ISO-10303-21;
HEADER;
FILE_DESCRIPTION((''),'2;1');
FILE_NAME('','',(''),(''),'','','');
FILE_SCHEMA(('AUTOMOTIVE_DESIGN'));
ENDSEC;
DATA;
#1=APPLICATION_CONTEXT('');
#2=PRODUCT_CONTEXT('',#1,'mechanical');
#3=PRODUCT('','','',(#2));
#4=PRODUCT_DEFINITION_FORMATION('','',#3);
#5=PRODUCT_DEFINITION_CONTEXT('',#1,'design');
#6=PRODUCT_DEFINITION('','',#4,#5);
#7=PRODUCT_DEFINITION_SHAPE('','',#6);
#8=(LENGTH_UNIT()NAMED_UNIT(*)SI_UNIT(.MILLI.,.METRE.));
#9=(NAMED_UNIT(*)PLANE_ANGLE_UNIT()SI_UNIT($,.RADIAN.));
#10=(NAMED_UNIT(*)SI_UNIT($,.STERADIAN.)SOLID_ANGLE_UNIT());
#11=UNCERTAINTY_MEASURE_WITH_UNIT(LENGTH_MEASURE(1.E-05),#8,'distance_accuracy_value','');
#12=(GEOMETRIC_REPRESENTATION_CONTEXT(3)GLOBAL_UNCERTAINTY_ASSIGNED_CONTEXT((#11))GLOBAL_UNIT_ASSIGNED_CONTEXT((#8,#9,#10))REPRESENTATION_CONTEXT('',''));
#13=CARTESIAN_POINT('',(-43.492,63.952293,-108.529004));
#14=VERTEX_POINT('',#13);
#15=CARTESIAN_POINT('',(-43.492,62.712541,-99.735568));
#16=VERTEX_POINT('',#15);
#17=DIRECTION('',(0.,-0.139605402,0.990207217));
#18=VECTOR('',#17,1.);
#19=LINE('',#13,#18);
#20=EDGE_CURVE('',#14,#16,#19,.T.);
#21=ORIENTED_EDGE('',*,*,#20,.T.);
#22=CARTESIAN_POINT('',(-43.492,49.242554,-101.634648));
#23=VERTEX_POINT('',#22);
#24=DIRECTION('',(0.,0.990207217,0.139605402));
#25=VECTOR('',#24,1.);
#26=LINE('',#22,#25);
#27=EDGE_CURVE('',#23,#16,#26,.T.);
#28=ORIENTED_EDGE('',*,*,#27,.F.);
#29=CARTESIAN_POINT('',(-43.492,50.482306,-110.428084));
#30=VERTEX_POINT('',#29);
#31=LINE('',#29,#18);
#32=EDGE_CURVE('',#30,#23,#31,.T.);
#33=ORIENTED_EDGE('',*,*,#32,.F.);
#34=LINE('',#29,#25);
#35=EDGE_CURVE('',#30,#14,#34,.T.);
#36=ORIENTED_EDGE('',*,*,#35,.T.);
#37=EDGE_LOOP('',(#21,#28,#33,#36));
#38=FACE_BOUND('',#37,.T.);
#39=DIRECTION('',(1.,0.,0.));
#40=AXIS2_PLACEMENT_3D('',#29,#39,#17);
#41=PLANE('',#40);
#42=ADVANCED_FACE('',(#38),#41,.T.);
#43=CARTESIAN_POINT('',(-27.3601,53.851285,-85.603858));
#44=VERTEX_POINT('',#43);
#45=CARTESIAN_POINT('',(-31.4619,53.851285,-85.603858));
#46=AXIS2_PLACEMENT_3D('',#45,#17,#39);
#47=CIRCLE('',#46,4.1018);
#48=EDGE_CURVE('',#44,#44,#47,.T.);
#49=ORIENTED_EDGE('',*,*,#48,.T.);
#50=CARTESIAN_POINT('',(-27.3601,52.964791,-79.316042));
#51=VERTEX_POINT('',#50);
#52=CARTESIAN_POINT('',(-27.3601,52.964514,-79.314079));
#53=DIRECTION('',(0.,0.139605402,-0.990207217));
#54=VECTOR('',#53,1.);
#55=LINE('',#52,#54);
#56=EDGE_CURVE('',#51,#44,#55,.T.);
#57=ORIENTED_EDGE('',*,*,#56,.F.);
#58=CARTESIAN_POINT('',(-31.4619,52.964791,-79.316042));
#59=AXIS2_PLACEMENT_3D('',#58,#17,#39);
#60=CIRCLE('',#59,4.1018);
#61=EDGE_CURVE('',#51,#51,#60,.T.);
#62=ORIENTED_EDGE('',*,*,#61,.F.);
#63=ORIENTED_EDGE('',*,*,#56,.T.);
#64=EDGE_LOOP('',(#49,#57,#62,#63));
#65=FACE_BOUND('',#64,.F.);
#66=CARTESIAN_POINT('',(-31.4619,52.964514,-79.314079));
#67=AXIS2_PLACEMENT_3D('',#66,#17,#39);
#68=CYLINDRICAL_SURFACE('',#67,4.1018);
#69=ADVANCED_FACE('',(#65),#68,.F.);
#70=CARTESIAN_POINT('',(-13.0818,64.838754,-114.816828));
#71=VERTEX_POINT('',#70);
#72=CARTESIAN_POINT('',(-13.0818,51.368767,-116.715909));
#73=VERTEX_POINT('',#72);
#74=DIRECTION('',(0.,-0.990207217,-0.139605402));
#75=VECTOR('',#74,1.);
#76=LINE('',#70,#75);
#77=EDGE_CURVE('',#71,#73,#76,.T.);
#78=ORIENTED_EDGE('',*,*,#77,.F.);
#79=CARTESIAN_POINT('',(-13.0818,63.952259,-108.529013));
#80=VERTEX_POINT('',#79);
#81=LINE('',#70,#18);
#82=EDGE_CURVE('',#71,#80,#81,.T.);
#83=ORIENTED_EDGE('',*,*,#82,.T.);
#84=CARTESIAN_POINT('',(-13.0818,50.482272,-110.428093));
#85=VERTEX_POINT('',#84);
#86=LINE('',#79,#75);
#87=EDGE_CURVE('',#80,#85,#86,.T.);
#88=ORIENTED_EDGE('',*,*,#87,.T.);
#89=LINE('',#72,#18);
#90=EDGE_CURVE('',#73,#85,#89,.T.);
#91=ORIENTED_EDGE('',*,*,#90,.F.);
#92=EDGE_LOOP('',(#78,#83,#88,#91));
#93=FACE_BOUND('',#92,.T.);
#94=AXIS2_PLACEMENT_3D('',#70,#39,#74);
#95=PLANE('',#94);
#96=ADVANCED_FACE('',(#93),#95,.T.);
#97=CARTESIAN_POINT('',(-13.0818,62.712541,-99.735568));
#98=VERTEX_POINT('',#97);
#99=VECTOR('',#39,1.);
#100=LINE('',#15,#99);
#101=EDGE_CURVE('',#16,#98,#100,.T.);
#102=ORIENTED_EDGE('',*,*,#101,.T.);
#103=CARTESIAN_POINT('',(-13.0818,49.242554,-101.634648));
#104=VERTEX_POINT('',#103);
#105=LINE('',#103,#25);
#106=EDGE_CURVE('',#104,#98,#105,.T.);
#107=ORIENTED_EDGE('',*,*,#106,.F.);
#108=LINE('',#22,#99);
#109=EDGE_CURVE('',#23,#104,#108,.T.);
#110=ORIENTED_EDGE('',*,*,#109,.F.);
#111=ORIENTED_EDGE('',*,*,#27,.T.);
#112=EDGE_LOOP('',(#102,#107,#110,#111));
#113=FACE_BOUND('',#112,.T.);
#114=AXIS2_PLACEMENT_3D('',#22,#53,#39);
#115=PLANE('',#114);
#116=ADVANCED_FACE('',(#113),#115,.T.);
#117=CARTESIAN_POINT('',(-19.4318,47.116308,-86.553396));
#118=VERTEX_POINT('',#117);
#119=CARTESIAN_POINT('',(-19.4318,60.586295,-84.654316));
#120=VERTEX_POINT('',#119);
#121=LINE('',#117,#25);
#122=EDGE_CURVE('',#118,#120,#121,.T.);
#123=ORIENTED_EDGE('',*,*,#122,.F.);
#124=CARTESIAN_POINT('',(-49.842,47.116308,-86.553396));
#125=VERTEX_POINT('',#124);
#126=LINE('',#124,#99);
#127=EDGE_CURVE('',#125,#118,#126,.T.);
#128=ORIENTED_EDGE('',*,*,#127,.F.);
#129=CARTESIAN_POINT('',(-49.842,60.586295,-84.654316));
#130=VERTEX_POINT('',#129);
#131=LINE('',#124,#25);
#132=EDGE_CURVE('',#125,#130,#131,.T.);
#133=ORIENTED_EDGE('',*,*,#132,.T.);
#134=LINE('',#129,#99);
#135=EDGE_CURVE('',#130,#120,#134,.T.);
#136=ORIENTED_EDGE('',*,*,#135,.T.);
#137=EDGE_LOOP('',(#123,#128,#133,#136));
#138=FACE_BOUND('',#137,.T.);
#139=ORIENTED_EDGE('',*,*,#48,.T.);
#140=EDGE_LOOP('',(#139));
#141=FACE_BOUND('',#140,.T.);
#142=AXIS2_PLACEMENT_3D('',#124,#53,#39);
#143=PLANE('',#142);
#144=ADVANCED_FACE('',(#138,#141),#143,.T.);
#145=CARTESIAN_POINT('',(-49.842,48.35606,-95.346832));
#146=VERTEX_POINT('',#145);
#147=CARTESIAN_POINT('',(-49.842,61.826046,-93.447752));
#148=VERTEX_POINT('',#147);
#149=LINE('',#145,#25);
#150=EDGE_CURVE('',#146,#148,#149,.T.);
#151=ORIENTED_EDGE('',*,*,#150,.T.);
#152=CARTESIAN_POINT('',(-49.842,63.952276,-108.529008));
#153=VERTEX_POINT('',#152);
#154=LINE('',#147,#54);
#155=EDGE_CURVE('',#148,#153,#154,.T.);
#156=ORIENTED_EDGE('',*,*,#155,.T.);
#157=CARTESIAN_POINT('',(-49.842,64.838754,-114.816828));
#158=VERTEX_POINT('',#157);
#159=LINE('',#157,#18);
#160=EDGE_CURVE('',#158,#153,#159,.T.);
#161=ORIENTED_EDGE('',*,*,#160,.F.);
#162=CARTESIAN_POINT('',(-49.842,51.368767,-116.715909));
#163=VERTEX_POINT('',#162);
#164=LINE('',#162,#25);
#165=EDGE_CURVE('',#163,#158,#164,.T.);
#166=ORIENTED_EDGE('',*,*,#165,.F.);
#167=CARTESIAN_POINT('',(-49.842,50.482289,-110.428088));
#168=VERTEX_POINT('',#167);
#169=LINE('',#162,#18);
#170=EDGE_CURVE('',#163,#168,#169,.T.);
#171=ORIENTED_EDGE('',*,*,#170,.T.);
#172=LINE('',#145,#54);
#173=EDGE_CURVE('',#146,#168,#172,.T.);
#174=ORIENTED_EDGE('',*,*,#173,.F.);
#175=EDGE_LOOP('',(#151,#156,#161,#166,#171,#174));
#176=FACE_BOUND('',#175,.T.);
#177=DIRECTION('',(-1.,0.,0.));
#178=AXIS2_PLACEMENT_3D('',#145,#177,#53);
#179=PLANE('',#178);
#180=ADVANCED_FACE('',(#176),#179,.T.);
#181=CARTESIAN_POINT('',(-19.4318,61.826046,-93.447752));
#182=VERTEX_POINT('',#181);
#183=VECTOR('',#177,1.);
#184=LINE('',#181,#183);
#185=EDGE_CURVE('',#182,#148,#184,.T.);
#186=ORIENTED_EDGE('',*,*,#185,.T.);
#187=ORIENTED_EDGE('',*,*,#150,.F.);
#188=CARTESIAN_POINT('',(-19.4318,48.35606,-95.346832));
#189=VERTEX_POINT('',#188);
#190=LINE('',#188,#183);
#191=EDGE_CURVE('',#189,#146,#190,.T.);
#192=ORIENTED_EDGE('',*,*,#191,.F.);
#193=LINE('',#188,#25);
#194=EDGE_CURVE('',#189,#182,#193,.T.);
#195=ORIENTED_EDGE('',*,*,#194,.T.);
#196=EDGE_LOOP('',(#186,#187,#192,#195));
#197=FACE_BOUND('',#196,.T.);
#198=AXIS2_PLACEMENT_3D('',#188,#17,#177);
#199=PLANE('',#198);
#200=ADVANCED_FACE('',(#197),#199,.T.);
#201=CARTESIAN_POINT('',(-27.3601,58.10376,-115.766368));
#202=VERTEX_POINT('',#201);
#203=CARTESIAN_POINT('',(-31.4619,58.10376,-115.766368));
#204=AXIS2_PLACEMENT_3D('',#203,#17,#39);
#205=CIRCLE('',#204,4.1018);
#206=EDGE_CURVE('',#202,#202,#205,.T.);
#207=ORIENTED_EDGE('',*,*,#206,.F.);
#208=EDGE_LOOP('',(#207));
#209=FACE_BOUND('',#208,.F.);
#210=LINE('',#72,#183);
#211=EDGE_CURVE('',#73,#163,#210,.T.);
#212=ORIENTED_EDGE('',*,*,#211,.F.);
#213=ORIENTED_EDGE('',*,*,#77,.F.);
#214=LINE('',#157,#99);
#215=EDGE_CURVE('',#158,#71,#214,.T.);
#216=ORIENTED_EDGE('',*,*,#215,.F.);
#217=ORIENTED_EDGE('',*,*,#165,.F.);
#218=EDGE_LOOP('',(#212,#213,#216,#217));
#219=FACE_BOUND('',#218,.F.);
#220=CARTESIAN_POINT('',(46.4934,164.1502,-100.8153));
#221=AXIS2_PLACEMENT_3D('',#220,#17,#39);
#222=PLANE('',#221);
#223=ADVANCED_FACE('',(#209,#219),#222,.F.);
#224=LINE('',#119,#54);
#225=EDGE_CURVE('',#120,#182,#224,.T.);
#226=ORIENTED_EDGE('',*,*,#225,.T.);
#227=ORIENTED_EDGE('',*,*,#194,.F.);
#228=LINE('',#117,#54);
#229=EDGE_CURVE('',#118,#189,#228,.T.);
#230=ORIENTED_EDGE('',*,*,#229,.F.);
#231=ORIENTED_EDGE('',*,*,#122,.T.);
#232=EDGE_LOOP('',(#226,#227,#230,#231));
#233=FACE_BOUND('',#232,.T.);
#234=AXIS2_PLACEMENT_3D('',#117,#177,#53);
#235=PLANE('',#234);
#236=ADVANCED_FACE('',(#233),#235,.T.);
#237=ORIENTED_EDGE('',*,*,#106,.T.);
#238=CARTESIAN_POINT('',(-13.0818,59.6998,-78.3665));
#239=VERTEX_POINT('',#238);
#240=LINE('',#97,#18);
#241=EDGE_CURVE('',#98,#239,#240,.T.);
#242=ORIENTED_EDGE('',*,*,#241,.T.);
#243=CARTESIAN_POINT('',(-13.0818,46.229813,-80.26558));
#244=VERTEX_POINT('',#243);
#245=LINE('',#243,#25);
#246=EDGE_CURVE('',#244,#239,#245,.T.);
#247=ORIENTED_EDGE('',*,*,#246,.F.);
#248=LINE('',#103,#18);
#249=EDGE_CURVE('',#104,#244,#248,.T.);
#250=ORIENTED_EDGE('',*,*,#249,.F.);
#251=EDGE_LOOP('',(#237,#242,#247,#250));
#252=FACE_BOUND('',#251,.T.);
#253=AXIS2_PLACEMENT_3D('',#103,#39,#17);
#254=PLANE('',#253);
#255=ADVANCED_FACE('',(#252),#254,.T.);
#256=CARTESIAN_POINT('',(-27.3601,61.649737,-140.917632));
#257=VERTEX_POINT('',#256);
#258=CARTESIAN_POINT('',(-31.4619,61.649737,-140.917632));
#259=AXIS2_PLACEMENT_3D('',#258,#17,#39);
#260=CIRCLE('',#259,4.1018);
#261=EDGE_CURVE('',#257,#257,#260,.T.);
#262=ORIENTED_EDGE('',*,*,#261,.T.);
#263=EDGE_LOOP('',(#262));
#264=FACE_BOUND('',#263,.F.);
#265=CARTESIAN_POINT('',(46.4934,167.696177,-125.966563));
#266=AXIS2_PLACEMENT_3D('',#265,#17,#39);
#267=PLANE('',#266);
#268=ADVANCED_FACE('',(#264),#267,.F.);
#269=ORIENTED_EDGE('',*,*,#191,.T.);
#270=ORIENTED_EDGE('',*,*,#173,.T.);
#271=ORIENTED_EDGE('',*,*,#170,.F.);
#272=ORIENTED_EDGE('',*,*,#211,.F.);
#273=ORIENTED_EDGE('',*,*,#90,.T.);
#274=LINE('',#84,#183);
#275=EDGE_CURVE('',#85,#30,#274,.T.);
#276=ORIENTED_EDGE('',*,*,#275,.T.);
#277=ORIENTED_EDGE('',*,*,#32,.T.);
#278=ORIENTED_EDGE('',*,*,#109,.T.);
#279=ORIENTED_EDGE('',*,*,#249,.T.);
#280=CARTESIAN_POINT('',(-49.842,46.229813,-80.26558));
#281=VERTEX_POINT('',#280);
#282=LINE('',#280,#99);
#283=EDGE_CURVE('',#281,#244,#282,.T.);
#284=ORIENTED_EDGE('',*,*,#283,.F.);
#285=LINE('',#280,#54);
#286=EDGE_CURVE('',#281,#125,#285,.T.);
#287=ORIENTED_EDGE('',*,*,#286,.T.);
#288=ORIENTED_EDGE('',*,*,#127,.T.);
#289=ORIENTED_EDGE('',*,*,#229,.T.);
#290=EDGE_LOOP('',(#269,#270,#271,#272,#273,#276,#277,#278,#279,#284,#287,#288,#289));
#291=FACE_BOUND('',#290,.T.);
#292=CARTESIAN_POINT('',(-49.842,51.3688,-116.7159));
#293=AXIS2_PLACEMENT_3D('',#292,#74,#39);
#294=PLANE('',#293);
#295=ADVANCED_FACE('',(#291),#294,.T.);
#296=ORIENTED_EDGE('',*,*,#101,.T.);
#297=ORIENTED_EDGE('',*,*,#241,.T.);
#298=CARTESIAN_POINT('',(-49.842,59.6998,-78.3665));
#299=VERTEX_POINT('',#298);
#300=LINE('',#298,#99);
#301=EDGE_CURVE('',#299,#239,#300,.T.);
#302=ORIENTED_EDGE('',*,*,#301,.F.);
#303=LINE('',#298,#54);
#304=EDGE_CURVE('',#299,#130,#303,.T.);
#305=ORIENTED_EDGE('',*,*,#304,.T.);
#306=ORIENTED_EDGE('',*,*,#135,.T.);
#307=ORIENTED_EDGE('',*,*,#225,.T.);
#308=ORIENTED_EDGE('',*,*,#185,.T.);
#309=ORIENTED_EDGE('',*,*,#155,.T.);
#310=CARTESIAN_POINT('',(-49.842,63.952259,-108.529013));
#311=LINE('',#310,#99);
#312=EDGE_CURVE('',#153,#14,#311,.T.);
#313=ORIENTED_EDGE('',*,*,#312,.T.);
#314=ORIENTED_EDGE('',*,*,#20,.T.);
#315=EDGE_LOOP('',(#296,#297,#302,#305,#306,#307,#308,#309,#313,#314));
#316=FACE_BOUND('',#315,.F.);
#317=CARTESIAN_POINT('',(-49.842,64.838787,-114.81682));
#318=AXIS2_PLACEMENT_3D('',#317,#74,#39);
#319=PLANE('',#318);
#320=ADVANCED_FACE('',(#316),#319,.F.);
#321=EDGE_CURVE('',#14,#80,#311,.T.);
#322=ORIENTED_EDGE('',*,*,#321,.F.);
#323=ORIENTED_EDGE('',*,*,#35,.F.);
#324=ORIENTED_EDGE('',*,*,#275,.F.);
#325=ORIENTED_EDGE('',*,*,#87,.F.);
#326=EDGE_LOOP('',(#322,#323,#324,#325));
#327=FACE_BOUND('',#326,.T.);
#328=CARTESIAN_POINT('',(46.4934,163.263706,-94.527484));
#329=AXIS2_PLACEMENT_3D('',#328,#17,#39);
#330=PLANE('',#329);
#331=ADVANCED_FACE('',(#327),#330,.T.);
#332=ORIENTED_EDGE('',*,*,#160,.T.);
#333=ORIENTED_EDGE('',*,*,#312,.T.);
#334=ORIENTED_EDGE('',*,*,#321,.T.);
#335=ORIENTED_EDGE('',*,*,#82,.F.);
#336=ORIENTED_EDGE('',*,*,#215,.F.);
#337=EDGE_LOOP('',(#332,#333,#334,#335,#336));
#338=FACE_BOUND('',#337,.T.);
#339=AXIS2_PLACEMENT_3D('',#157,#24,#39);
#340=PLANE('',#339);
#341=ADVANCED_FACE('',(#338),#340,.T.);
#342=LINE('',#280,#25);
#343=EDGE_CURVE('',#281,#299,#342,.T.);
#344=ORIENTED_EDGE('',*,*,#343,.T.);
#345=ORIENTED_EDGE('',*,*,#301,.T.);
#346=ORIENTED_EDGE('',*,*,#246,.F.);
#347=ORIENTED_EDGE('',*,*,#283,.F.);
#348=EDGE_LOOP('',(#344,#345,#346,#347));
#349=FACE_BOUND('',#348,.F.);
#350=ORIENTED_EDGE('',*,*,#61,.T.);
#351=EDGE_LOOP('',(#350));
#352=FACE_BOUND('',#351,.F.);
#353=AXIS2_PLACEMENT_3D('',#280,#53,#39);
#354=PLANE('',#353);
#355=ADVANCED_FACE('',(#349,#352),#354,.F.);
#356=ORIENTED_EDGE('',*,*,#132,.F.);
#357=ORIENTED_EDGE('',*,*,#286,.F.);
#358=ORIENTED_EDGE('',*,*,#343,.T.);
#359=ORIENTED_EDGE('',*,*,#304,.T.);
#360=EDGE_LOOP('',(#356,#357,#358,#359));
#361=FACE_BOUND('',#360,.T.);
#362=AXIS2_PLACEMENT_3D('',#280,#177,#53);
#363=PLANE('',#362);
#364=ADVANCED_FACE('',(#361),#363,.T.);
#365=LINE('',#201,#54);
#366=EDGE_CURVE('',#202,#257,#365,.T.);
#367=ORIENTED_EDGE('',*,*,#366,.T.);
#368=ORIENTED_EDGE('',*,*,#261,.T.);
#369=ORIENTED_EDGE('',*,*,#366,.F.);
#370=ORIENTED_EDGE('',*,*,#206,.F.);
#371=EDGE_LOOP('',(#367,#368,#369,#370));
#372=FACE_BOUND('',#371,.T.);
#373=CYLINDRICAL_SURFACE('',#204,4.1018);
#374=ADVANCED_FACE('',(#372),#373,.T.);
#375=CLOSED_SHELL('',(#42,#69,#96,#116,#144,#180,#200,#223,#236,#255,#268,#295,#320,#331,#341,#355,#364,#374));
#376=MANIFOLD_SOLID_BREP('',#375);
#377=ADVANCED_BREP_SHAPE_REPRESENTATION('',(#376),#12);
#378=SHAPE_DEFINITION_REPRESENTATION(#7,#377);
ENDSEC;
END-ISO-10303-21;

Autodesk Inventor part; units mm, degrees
ref_plane "YZ Plane" through (0, 0, 0) normal (1, 0, 0) x (0, 1, 0)
ref_plane "XZ Plane" through (0, 0, 0) normal (0, 1, 0) x (-1, 0, 0)
ref_plane "XY Plane" through (0, 0, 0) normal (0, 0, 1) x (1, 0, 0)
ref_plane "Work Plane1" through (46.4934, 164.1502, -100.8153) normal (0, -0.1396054, 0.9902072) x (1, 0, 0)
sketch "Sketch1" plane through (46.4934, 164.1502, -100.8153) normal (0, -0.1396054, 0.9902072) x (1, 0, 0)
  circle A0 centre (-77.9553, -107.0952) radius 4.3235 projected
  circle A1 centre (-77.9553, -107.0952) radius 4.1018
  point P0 (-46.4934, -148.4684)
extrude "Extrusion1" add sketch "Sketch1" against normal blind 25.4 contours A1
thread "Thread1" size "3/8-16 UNC" class "2A" standard "ANSI Unified Screw Threads" length 11
sketch "Sketch2" plane through (46.4934, 164.1502, -100.8153) normal (0, -0.1396054, 0.9902072) x (1, 0, 0)
  circle A0 centre (-77.9553, -107.0952) radius 4.3235 construction
  line L0 (0, -50.1427) -> (0, 0) construction
  arc A1 (-38.2285, -91.2202) -> (0, -50.1427) centre (-77.9553, -15.9215) ccw construction
  line L1 (-38.2285, -91.2202) -> (-117.6821, -91.2202) construction
  arc A2 (-155.9106, -50.1427) -> (-117.6821, -91.2202) centre (-77.9553, -15.9215) ccw construction
  line L2 (-155.9106, -50.1427) -> (-155.9106, 0) construction
  line L3 (-155.9106, 0) -> (-159.0856, 0) construction
  line L4 (-159.0856, -50.1427) -> (-159.0856, 0) construction
  arc A3 (-159.0856, -50.1427) -> (-117.8938, -94.3952) centre (-77.9553, -15.9215) ccw construction
  line L5 (-117.8938, -94.3952) -> (-103.6066, -94.3952) construction
  line L6 (-103.6066, -94.3952) -> (-103.6066, -119.7952) construction
  line L7 (-52.304, -119.7952) -> (-103.6066, -119.7952) construction
  line L8 (-52.304, -94.3952) -> (-52.304, -119.7952) construction
  line L9 (-52.304, -94.3952) -> (-38.0167, -94.3952) construction
  arc A4 (-38.0167, -94.3952) -> (3.175, -50.1427) centre (-77.9553, -15.9215) ccw construction
  line L10 (3.175, 0) -> (3.175, -50.1427) construction
  line L11 (0, 0) -> (3.175, 0) construction
  line L12 (-96.3354, -100.2936) -> (-59.5752, -100.2936)
  line L13 (-59.5752, -100.2936) -> (-59.5752, -113.8968)
  line L14 (-59.5752, -113.8968) -> (-96.3354, -113.8968)
  line L15 (-96.3354, -113.8968) -> (-96.3354, -100.2936)
  line L16 (-96.3354, -107.0952) -> (-59.5752, -107.0952) construction
  line L17 (-77.9553, -100.2936) -> (-77.9553, -113.8968) construction
  point P0 (-46.4934, -148.4684)
extrude "Extrusion2" add sketch "Sketch2" along normal blind 6.35
sketch "Sketch4" plane through (-49.842, 51.3688, -116.7159) normal (0, -0.9902072, -0.1396054) x (1, 0, 0)
  line L0 (0, 0) -> (36.7602, 0) construction
  line L1 (36.7602, 0) -> (36.7602, 6.35) construction
  line L2 (0, 6.35) -> (36.7602, 6.35) construction
  line L3 (0, 0) -> (0, 6.35) construction
  line L4 (0, 15.2304) -> (36.7602, 15.2304) construction
  line L5 (36.7602, 21.5804) -> (0, 21.5804) construction
  line L6 (0, 21.5804) -> (0, 15.2304) construction
  line L7 (30.4102, 59.9083) -> (30.4102, 21.5804) construction
  line L8 (0, 30.4608) -> (30.4102, 30.4608) construction
  line L9 (0, 30.4608) -> (0, 36.8108) construction
  line L10 (6.35, 6.35) -> (6.35, 15.2304) construction
  line L11 (36.7602, 36.8108) -> (0, 36.8108) construction
  line L12 (0, 30.4608) -> (0, 36.8108) construction
  line L13 (36.7602, 15.2304) -> (36.7602, 36.8108) construction
  line L14 (0, 0) -> (0, 21.5804) construction
  line L15 (6.35, 6.35) -> (6.35, 15.2304)
  line L16 (6.35, 15.2304) -> (36.7602, 15.2304)
  line L17 (36.7602, 15.2304) -> (36.7602, 36.8108)
  line L18 (0, 36.8108) -> (36.7602, 36.8108)
  line L19 (0, 36.8108) -> (0, 30.4608)
  line L20 (0, 30.4608) -> (30.4102, 30.4608)
  line L21 (30.4102, 30.4608) -> (30.4102, 21.5804)
  line L22 (30.4102, 21.5804) -> (0, 21.5804)
  line L23 (0, 21.5804) -> (0, 6.35)
  line L24 (0, 6.35) -> (6.35, 6.35)
  line L25 (0, 6.35) -> (36.7602, 6.35) projected
  point P0 (49.842, 122.7443)
  dimension "d7" = 6.35
  dimension "d11" = 6.35
  dimension "d12" = 6.35
  dimension "d13" = 6.35
extrude "Extrusion3" add sketch "Sketch4" against normal up to surface (13.6032 mm away)
sketch "Sketch5" plane through (-49.842, 46.2298, -80.2656) normal (0, -0.1396054, 0.9902072) x (1, 0, 0)
  circle A0 centre (18.3801, 6.8016) radius 4.1018 projected
  point P0 (49.842, -34.5716)
extrude "Extrusion4" cut sketch "Sketch5" against normal up to surface (6.35 mm away)
